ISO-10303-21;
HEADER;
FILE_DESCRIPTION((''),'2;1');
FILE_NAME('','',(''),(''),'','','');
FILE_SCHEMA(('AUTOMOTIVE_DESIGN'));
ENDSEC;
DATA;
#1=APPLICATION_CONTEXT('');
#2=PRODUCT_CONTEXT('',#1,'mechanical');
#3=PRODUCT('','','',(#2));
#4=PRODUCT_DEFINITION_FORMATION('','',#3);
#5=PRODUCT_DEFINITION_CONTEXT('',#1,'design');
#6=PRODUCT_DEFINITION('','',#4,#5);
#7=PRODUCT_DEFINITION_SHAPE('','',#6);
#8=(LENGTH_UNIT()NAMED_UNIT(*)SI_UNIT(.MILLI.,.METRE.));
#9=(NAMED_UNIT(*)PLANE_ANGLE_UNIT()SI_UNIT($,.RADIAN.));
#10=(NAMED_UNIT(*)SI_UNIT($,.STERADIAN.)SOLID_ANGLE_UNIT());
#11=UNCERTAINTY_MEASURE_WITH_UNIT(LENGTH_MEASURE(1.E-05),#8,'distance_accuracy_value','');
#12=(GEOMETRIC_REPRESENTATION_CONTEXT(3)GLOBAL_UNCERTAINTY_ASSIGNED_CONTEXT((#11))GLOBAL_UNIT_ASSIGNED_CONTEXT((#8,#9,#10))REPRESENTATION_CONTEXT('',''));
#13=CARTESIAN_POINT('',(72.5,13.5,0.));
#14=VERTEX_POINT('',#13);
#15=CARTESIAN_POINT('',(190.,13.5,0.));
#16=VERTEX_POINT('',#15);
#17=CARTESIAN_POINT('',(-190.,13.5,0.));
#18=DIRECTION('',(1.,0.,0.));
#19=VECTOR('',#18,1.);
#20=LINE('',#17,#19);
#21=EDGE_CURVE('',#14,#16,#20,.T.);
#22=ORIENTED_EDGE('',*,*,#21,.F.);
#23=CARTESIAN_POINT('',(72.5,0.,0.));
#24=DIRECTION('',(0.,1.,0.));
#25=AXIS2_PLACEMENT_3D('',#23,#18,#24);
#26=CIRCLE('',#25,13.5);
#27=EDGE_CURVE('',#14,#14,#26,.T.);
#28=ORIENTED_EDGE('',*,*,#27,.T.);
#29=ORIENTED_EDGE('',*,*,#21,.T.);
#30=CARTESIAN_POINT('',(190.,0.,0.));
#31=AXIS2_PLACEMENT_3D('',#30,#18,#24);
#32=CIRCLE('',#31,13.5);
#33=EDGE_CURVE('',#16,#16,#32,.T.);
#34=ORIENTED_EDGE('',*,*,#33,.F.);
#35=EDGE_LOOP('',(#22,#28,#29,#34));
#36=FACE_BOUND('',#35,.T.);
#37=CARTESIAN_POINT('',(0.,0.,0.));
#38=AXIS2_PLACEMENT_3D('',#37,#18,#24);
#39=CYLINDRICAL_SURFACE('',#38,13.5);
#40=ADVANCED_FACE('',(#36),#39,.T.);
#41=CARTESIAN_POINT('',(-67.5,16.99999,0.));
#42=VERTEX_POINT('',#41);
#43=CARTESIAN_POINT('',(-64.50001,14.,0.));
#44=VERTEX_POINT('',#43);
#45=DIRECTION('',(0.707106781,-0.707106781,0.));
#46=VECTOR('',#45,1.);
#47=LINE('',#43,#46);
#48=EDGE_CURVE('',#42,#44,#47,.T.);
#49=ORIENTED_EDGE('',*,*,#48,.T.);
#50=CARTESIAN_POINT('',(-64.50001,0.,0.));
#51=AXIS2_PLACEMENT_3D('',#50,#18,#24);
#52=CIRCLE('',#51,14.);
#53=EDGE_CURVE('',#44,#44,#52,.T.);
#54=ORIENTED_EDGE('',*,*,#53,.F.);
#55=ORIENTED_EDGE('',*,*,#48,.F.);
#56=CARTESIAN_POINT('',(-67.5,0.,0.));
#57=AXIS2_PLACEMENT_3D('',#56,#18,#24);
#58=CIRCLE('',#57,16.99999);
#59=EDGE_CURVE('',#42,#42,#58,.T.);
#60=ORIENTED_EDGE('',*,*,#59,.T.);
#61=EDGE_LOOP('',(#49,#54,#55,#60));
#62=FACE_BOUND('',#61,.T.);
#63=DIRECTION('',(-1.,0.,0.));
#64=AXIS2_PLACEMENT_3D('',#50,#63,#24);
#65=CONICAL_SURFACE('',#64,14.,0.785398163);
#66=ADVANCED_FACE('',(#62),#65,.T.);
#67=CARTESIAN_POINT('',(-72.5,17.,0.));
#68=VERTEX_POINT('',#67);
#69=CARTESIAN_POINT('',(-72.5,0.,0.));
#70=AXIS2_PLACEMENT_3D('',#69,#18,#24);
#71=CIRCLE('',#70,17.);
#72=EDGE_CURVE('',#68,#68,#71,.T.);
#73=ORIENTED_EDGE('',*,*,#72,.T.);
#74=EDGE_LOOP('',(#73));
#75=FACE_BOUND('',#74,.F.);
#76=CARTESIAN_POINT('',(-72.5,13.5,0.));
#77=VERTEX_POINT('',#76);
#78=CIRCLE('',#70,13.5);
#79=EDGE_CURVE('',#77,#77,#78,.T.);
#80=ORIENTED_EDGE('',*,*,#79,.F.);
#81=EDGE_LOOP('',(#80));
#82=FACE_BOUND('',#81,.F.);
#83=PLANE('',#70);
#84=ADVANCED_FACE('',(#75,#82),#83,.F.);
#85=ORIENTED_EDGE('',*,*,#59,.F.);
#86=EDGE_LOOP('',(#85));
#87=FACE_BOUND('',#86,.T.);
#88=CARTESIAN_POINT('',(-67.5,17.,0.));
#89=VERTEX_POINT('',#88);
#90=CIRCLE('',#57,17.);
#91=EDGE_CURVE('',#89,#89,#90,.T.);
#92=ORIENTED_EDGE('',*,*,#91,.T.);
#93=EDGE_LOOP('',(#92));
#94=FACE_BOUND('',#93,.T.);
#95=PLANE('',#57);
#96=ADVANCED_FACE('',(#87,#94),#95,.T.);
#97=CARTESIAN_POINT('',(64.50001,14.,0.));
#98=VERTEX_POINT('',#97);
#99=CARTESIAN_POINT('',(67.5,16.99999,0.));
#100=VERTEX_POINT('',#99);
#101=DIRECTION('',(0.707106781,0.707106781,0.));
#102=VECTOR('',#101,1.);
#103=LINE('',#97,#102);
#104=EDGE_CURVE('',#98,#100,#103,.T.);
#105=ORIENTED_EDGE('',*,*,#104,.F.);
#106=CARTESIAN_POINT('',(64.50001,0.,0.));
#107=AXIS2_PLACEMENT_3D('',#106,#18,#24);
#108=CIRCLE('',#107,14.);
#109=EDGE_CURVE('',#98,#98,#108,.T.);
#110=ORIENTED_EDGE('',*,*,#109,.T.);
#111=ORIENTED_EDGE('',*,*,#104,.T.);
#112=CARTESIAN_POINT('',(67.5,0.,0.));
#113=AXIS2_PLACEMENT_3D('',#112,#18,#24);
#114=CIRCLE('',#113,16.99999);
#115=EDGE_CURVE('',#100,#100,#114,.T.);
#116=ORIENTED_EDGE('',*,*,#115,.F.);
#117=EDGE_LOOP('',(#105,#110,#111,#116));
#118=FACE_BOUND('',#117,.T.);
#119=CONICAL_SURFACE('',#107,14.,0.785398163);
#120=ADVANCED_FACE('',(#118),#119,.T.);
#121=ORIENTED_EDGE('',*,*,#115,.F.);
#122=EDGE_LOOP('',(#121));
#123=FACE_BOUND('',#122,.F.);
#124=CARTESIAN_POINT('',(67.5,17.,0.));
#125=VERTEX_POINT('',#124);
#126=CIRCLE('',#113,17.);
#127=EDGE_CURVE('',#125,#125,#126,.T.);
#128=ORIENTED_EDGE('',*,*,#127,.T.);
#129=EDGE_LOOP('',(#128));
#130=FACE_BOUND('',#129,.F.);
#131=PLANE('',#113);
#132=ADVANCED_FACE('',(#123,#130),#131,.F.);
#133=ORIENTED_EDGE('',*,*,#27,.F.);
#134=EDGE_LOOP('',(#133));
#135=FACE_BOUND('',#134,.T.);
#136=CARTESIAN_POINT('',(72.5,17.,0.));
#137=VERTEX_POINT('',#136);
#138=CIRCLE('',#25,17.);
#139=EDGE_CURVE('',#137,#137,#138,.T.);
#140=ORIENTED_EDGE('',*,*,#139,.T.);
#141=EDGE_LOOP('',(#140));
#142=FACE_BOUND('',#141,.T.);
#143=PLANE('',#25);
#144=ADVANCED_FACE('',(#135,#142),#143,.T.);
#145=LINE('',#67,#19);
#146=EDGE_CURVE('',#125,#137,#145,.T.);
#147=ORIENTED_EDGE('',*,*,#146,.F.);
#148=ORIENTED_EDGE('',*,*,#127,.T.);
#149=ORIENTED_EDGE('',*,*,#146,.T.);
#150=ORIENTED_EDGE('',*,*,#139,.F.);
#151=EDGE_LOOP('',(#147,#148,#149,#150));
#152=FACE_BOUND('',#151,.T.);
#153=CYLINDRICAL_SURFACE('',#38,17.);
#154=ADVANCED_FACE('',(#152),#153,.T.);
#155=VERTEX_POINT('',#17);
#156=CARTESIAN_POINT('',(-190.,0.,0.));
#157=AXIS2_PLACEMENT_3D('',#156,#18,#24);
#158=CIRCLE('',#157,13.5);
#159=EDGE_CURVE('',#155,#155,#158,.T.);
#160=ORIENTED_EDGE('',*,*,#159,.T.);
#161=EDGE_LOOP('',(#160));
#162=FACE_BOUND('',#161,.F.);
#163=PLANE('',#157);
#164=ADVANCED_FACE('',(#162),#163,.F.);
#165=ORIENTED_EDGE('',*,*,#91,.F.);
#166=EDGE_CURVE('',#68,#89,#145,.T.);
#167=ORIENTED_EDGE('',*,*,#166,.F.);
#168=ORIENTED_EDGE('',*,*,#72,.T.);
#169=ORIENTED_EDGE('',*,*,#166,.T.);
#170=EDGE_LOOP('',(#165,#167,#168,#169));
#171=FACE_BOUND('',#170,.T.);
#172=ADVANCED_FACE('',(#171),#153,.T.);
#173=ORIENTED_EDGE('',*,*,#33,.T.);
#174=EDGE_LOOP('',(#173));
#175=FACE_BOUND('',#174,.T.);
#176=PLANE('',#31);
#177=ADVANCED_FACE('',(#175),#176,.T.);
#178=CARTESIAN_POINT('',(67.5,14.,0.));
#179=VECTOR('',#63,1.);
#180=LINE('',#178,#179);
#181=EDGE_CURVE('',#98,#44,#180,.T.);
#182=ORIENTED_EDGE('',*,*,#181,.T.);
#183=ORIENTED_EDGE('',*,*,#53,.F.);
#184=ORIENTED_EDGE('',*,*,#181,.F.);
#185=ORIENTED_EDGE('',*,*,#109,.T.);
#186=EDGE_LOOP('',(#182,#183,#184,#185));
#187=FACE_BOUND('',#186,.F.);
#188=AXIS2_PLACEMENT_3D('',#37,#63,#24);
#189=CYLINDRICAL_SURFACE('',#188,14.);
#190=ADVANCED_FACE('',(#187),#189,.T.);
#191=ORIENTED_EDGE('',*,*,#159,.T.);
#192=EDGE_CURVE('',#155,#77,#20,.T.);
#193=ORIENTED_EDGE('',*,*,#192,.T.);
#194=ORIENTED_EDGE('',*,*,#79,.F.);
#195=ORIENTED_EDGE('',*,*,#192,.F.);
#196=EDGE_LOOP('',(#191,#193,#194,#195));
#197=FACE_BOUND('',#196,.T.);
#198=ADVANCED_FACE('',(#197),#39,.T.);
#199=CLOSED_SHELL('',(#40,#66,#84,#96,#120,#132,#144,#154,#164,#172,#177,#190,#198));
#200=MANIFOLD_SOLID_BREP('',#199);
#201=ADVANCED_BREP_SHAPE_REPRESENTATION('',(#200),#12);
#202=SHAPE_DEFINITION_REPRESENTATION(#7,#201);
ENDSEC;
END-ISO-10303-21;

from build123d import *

# Parameters (mm, degrees)
F0_R     = 13.5
F1_DEPTH = 190
F2_R     = 17
F3_DEPTH = 72.5
F4_R     = 17.5
F4_R_2   = 14
F5_DEPTH = 67.5
F6_SIZE  = 2.99999


# Not quite as in the source:
# - a fillet or chamfer is up to 0.001 mm smaller than in the source, because OpenCascade refuses the exact size


with BuildPart() as f1:
    # F0 (on Right) → F1 (new body, symmetric)
    with BuildSketch(Plane.YZ):
        Circle(F0_R)
    extrude(amount=F1_DEPTH, both=True)

    # F2 (on Right) → F3 (join, symmetric)
    with BuildSketch(Plane.YZ):
        Circle(F2_R)
    extrude(amount=F3_DEPTH, both=True)

    # F4 (on Right) → F5 (cut, symmetric)
    with BuildSketch(Plane.YZ):
        Circle(F4_R)
        Circle(F4_R_2, mode=Mode.SUBTRACT)
    extrude(amount=F5_DEPTH, both=True, mode=Mode.SUBTRACT)

    # F6 (size 3 in the source; OpenCascade refuses exactly that, so slightly less here)
    f6_edges = [f1.edges().sort_by_distance(p)[0] for p in [
        (-67.5, -14, 0),
        (67.5, -14, 0),
    ]]
    chamfer(f6_edges, length=F6_SIZE)


solid = f1.part
